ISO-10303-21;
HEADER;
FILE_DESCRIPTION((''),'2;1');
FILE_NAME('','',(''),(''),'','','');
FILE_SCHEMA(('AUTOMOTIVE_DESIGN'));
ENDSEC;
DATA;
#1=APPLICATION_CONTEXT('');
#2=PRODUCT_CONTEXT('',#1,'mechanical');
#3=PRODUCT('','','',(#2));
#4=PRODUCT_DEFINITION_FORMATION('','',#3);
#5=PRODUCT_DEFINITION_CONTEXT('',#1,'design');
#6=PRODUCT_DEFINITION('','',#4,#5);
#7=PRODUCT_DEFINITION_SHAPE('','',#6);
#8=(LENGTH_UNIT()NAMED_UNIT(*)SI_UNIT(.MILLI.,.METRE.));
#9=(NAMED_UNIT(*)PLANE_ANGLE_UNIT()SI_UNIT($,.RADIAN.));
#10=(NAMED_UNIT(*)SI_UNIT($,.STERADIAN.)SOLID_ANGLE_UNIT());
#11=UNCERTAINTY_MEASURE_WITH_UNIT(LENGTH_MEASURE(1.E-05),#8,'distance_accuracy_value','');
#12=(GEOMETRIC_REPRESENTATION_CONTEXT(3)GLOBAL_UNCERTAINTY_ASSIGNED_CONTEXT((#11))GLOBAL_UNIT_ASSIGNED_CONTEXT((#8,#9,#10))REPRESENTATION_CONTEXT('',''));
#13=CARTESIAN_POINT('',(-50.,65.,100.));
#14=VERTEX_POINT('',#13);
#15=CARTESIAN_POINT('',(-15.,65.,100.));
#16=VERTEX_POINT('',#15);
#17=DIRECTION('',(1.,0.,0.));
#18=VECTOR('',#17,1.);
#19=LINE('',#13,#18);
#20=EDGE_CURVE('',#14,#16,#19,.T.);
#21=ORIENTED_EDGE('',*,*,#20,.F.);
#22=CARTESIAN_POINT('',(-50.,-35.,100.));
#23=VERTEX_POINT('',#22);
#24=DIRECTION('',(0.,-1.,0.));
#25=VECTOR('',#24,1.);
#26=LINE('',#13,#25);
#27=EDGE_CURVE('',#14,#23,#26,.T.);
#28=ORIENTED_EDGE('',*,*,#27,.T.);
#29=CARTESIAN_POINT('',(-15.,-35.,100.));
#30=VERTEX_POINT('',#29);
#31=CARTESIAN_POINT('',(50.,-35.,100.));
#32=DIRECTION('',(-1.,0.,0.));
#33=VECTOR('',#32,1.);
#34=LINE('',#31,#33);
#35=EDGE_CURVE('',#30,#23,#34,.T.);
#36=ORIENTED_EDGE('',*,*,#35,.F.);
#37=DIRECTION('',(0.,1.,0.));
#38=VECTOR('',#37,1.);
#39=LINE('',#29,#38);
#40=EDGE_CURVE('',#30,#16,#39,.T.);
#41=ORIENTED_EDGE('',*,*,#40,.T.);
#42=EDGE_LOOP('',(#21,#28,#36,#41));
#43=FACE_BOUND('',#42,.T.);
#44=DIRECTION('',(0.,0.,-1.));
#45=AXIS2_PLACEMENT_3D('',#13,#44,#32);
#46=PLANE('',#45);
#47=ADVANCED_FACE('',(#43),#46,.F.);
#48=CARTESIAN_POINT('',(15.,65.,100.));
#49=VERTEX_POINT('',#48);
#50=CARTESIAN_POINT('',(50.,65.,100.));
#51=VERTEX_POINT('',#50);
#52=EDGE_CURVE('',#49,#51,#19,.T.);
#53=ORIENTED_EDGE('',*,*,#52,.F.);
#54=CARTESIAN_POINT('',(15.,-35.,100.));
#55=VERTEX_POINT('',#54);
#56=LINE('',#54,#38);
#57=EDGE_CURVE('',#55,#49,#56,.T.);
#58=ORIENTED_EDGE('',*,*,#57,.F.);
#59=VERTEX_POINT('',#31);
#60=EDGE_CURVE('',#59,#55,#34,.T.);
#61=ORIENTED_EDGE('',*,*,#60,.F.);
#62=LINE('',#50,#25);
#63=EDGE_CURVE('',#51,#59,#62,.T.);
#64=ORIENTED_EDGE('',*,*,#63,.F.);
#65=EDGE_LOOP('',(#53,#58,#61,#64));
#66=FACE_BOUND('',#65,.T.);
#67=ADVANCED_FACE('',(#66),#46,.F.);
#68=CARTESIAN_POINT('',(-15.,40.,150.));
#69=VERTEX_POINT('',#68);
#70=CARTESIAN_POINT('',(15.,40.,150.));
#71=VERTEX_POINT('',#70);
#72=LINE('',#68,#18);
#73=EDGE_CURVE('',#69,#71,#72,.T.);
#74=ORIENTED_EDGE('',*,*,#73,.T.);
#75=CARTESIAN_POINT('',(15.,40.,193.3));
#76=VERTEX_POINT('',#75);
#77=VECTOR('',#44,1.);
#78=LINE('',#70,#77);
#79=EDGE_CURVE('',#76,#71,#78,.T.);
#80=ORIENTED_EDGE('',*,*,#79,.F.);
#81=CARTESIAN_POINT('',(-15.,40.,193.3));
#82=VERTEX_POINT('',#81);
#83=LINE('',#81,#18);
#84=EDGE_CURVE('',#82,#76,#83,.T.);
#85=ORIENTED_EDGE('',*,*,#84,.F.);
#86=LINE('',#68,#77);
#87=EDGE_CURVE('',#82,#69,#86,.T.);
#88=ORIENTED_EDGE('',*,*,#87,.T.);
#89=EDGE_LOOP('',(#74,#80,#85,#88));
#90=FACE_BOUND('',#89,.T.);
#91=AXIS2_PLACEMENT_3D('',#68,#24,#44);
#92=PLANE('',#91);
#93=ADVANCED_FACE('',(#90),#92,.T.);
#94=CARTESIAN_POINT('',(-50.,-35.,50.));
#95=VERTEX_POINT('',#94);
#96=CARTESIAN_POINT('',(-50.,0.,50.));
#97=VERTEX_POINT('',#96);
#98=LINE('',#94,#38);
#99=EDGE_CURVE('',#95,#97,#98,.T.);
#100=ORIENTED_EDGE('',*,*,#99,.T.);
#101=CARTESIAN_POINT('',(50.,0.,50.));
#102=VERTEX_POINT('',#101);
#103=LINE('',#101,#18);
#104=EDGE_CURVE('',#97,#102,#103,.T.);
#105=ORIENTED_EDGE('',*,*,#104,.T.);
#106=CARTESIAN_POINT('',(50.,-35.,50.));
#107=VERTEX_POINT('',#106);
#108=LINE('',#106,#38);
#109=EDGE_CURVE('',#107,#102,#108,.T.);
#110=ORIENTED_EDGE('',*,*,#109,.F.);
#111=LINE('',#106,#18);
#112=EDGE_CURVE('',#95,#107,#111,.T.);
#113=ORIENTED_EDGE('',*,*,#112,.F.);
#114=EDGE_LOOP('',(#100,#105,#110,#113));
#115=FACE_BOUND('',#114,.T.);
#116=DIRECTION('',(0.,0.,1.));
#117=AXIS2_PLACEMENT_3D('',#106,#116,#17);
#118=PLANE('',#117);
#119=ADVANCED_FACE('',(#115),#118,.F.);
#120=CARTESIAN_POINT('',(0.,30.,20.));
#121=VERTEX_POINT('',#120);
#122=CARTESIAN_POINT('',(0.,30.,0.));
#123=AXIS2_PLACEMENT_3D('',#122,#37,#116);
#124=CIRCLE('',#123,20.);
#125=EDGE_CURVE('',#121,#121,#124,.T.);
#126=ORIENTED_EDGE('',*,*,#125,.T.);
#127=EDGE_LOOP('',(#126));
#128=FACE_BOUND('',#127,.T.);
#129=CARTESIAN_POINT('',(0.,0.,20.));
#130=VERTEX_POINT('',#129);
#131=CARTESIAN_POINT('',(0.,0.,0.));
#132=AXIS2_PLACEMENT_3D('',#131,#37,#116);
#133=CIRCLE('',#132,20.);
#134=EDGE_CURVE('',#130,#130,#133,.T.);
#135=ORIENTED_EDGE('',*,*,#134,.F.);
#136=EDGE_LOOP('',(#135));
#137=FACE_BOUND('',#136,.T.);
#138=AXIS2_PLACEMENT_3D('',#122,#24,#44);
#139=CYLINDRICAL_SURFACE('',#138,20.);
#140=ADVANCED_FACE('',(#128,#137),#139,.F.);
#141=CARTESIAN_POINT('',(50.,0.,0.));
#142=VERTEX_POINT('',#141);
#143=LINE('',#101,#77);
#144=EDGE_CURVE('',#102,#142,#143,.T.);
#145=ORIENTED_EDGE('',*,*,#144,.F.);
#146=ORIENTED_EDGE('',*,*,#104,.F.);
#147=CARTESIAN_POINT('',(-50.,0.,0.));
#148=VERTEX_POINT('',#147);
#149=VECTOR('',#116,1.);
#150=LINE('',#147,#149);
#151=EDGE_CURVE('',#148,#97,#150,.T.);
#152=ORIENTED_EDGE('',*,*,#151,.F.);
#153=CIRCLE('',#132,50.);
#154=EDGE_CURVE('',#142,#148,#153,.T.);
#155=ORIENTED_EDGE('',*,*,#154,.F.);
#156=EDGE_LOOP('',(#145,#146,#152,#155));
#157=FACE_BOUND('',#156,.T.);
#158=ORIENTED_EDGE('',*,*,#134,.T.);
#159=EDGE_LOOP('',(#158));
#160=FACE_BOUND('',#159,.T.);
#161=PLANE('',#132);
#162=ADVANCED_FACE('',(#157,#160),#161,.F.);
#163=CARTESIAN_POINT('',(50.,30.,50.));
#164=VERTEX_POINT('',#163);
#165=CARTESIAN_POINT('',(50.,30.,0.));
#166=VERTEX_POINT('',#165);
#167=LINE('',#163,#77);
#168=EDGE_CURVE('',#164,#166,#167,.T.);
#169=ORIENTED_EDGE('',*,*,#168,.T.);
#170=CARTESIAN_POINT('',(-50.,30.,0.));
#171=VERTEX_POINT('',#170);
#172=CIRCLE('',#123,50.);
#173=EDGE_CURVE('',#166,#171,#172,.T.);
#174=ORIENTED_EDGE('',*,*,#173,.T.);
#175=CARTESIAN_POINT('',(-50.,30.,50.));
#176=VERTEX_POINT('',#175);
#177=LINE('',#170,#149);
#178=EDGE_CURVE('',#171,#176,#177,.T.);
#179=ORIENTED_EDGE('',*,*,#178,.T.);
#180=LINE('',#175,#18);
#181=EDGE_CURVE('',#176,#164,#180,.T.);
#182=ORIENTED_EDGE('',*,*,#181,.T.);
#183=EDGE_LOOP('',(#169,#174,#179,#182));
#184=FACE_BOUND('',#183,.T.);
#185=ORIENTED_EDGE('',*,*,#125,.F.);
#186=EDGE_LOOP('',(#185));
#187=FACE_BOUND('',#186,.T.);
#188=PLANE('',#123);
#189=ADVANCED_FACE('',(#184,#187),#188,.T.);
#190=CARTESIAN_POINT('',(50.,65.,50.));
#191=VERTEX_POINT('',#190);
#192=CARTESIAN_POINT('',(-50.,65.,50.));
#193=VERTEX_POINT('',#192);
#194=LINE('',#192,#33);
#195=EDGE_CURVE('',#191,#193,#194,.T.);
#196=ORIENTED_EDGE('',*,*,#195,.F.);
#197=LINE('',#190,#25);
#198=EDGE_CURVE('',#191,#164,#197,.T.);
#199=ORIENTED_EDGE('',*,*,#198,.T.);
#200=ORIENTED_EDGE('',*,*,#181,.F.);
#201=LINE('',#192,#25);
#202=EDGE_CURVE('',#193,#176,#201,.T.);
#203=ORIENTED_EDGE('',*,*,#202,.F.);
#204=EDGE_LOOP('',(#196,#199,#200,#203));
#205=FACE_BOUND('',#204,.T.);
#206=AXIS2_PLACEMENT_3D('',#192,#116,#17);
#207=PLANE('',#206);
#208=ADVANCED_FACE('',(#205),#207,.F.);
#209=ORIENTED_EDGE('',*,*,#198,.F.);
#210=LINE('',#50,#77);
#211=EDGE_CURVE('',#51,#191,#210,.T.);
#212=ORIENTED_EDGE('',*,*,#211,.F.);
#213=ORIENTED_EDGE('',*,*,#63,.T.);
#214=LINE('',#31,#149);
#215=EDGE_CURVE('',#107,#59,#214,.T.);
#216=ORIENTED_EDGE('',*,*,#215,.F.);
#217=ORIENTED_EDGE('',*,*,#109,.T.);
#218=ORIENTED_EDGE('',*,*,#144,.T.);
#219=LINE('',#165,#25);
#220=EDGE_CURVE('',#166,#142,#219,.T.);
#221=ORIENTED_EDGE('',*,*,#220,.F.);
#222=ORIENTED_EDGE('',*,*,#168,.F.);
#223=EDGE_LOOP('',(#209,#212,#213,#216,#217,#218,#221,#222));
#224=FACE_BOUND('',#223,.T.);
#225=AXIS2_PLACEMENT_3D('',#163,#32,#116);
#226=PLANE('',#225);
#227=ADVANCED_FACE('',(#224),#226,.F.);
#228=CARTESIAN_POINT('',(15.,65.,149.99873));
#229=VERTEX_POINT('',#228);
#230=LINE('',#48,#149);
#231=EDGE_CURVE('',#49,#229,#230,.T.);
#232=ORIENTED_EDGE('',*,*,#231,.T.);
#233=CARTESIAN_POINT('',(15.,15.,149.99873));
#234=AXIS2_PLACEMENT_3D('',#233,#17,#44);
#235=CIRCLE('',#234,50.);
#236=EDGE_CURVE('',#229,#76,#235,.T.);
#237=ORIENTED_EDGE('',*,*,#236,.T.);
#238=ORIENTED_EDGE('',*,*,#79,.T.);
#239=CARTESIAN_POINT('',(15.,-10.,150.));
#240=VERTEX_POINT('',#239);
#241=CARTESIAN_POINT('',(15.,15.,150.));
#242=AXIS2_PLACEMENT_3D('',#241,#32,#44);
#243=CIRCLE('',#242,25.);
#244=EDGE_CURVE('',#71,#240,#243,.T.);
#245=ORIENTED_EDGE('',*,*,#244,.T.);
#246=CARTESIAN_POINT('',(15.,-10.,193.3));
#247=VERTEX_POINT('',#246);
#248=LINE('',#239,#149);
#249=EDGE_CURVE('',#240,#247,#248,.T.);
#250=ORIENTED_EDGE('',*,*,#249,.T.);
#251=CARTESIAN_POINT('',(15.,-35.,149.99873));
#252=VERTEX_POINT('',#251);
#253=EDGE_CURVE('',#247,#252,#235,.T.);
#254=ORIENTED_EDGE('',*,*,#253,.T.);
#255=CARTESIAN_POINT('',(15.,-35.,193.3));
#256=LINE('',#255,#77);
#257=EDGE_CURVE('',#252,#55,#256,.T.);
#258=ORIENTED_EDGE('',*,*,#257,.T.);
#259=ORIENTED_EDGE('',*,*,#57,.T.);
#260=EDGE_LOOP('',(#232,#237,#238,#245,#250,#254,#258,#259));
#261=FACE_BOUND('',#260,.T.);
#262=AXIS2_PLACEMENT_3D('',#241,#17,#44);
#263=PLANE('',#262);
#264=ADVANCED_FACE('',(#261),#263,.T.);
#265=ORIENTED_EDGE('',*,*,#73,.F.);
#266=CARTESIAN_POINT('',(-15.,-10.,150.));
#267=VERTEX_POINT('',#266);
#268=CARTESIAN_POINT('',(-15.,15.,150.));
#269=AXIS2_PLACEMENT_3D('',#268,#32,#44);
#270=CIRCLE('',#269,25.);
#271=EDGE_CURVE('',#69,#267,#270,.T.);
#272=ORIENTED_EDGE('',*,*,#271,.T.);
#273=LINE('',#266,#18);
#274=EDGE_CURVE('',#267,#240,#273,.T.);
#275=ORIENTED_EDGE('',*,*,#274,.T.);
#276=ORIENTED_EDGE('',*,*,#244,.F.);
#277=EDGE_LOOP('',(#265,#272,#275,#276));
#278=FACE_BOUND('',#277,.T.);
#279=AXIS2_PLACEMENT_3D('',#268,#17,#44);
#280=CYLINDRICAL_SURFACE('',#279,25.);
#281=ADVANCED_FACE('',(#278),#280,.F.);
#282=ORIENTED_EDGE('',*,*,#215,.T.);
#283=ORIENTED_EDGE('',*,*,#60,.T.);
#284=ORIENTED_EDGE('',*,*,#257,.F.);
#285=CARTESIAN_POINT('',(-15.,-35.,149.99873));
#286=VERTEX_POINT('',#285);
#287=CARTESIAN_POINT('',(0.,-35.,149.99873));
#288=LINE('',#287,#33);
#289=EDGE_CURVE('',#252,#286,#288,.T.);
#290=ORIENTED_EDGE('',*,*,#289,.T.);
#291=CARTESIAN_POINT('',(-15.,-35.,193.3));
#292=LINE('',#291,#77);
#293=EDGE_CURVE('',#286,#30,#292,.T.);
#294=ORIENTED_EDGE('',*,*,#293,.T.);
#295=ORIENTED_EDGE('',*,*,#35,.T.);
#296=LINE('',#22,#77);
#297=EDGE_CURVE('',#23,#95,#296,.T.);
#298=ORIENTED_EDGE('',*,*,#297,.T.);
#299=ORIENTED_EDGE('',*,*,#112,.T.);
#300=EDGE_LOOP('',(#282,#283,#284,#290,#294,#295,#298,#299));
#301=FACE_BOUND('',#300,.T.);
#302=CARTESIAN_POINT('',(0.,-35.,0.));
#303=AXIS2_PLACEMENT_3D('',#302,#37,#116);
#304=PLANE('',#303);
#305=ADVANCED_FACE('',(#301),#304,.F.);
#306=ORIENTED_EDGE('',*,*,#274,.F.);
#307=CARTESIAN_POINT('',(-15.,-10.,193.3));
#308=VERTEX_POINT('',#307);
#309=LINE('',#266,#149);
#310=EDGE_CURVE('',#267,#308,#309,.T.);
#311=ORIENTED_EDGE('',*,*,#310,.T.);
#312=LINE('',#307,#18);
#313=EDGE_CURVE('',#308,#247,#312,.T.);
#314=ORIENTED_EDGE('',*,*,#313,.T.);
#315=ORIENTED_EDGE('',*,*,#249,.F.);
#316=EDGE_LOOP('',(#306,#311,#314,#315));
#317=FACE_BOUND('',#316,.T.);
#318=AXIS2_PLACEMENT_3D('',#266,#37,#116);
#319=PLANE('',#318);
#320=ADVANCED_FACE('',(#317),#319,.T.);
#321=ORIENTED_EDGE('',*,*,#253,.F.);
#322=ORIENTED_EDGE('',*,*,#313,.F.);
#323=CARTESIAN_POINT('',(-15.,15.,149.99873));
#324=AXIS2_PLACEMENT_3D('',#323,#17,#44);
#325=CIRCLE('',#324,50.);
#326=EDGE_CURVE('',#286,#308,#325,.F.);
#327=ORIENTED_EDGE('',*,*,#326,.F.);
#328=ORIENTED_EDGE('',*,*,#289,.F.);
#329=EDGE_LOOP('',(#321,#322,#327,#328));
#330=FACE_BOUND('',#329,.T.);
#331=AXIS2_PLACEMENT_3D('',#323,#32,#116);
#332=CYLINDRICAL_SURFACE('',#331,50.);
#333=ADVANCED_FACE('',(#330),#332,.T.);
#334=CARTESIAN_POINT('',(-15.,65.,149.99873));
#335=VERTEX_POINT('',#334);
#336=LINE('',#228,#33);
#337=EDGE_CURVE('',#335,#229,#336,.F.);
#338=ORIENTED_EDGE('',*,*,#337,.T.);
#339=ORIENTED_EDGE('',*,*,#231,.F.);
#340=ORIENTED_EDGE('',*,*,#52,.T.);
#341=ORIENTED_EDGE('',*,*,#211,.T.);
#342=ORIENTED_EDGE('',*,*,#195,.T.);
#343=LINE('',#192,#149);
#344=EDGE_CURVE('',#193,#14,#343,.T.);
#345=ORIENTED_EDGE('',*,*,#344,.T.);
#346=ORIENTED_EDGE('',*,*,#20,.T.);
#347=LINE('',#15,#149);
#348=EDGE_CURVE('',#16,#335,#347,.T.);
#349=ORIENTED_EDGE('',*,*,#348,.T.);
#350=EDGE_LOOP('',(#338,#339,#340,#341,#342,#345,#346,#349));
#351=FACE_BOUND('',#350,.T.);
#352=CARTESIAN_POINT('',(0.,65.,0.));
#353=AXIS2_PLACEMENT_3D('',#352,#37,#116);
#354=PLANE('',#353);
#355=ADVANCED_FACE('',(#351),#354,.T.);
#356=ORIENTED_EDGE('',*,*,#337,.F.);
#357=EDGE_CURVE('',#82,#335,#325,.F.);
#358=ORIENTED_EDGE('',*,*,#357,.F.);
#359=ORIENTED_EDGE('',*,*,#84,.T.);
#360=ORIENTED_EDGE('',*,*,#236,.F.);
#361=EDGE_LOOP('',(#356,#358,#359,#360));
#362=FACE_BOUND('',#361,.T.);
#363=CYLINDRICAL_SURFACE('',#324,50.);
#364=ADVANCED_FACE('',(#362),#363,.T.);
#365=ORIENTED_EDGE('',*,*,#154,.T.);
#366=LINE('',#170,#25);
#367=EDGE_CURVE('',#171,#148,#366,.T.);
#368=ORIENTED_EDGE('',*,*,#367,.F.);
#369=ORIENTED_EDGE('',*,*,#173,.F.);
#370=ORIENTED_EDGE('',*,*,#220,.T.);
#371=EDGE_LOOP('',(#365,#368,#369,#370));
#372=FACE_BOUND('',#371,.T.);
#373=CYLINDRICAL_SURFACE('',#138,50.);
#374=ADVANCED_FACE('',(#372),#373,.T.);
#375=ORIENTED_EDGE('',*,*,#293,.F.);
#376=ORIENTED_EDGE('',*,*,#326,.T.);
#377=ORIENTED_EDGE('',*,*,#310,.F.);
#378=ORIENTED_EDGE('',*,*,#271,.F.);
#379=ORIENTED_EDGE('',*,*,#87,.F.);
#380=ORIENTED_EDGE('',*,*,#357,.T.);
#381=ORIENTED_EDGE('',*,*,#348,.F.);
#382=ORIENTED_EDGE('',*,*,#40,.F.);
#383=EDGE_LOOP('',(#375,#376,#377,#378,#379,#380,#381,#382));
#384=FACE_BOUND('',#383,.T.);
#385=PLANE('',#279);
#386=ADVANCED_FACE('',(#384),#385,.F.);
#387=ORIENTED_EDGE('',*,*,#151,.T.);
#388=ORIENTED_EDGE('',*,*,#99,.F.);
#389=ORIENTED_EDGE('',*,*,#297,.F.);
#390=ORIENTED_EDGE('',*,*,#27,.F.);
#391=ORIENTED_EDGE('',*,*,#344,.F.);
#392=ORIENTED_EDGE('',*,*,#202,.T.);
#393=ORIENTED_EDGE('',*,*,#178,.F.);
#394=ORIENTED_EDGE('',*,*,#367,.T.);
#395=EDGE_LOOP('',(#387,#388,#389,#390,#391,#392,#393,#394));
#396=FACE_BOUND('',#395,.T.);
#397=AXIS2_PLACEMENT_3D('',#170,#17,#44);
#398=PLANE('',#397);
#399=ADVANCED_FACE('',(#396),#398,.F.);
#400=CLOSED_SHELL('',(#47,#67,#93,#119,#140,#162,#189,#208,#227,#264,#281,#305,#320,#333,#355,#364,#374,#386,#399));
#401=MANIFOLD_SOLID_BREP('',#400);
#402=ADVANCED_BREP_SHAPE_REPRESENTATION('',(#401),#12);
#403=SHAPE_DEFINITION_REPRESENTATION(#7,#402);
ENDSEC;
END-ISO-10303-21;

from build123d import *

# Parameters (mm, degrees)
CROQUIS3_R                   = 20
SALIENTE_EXTRUIR1_DEPTH      = 30
CROQUIS4_W                   = 100
CROQUIS4_H                   = 50
SALIENTE_EXTRUIR2_DEPTH      = 65
CROQUIS5_W                   = 100
CROQUIS5_H                   = 50
SALIENTE_EXTRUIR3_DEPTH      = 35
SALIENTE_EXTRUIR4_DEPTH      = 15
SALIENTE_EXTRUIR4_DEPTH_BACK = 15
REDONDEO2_R                  = 50


with BuildPart() as part:
    # Croquis3 → Saliente-Extruir1 (new body)
    with BuildSketch(Plane(origin=(0, 0, 0), x_dir=(1, 0, 0), z_dir=(0, 1, 0))):
        with BuildLine():
            Line((-50, 0), (-50, -50))
            Line((-50, -50), (50, -50))
            Line((50, -50), (50, 0))
            ThreePointArc((50, 0), (0, 50), (-50, 0))
        make_face()
        with Locations(Location((0, 0, 0), (0, 0, 270))):
            Circle(CROQUIS3_R, mode=Mode.SUBTRACT)
    extrude(amount=SALIENTE_EXTRUIR1_DEPTH)

    # Croquis4 → Saliente-Extruir2 (add)
    with BuildSketch(Plane(origin=(0, 0, 0), x_dir=(1, 0, 0), z_dir=(0, 1, 0))):
        with Locations((0, -75)):
            Rectangle(CROQUIS4_W, CROQUIS4_H)
    extrude(amount=SALIENTE_EXTRUIR2_DEPTH)

    # Croquis5 → Saliente-Extruir3 (add)
    with BuildSketch(Plane.XZ):
        with Locations((0, 75)):
            Rectangle(CROQUIS5_W, CROQUIS5_H)
    extrude(amount=SALIENTE_EXTRUIR3_DEPTH)

    # Croquis6 → Saliente-Extruir4 (add, two sides: drawn at the far end of the back side and taken through both)
    with BuildSketch(Plane(origin=(0, 0, 0), x_dir=(0, 0, -1), z_dir=(1, 0, 0)).offset(-SALIENTE_EXTRUIR4_DEPTH_BACK)):
        with BuildLine():
            Line((-100, 65), (-193.3, 65))
            Line((-193.3, 65), (-193.3, 40))
            Line((-193.3, 40), (-150, 40))
            ThreePointArc((-150, 40), (-125, 15), (-150, -10))
            Line((-150, -10), (-193.3, -10))
            Line((-193.3, -10), (-193.3, -35))
            Line((-193.3, -35), (-100, -35))
            Line((-100, -35), (-100, 65))
        make_face()
    extrude(amount=SALIENTE_EXTRUIR4_DEPTH + SALIENTE_EXTRUIR4_DEPTH_BACK)

    # Redondeo2
    # the kernel refuses this fillet: 50 mm, written as the material it takes off along each edge
    with BuildSketch(Plane(origin=(123.253175473, -35, 193.3), x_dir=(0, 0, -1), z_dir=(-1, 0, 0)), Plane(origin=(-123.253175473, 65, 193.3), x_dir=(0, 0, -1), z_dir=(1, 0, 0))) as redondeo2_piece_1:
        with BuildLine():
            CenterArc((43.301270189, -50), REDONDEO2_R, 90, 60)
            Line((0, -25), (-0.866025404, -24.5))
            ThreePointArc((-0.866025404, -24.5), (-1, -12.5), (-1, 0))
            Line((-1, 0), (0, 1))
            Line((0, 1), (43.301270189, 1))
            Line((43.301270189, 1), (43.301270189, 0))
        make_face()
    extrude(amount=246.506350946, mode=Mode.SUBTRACT)


solid = part.part
